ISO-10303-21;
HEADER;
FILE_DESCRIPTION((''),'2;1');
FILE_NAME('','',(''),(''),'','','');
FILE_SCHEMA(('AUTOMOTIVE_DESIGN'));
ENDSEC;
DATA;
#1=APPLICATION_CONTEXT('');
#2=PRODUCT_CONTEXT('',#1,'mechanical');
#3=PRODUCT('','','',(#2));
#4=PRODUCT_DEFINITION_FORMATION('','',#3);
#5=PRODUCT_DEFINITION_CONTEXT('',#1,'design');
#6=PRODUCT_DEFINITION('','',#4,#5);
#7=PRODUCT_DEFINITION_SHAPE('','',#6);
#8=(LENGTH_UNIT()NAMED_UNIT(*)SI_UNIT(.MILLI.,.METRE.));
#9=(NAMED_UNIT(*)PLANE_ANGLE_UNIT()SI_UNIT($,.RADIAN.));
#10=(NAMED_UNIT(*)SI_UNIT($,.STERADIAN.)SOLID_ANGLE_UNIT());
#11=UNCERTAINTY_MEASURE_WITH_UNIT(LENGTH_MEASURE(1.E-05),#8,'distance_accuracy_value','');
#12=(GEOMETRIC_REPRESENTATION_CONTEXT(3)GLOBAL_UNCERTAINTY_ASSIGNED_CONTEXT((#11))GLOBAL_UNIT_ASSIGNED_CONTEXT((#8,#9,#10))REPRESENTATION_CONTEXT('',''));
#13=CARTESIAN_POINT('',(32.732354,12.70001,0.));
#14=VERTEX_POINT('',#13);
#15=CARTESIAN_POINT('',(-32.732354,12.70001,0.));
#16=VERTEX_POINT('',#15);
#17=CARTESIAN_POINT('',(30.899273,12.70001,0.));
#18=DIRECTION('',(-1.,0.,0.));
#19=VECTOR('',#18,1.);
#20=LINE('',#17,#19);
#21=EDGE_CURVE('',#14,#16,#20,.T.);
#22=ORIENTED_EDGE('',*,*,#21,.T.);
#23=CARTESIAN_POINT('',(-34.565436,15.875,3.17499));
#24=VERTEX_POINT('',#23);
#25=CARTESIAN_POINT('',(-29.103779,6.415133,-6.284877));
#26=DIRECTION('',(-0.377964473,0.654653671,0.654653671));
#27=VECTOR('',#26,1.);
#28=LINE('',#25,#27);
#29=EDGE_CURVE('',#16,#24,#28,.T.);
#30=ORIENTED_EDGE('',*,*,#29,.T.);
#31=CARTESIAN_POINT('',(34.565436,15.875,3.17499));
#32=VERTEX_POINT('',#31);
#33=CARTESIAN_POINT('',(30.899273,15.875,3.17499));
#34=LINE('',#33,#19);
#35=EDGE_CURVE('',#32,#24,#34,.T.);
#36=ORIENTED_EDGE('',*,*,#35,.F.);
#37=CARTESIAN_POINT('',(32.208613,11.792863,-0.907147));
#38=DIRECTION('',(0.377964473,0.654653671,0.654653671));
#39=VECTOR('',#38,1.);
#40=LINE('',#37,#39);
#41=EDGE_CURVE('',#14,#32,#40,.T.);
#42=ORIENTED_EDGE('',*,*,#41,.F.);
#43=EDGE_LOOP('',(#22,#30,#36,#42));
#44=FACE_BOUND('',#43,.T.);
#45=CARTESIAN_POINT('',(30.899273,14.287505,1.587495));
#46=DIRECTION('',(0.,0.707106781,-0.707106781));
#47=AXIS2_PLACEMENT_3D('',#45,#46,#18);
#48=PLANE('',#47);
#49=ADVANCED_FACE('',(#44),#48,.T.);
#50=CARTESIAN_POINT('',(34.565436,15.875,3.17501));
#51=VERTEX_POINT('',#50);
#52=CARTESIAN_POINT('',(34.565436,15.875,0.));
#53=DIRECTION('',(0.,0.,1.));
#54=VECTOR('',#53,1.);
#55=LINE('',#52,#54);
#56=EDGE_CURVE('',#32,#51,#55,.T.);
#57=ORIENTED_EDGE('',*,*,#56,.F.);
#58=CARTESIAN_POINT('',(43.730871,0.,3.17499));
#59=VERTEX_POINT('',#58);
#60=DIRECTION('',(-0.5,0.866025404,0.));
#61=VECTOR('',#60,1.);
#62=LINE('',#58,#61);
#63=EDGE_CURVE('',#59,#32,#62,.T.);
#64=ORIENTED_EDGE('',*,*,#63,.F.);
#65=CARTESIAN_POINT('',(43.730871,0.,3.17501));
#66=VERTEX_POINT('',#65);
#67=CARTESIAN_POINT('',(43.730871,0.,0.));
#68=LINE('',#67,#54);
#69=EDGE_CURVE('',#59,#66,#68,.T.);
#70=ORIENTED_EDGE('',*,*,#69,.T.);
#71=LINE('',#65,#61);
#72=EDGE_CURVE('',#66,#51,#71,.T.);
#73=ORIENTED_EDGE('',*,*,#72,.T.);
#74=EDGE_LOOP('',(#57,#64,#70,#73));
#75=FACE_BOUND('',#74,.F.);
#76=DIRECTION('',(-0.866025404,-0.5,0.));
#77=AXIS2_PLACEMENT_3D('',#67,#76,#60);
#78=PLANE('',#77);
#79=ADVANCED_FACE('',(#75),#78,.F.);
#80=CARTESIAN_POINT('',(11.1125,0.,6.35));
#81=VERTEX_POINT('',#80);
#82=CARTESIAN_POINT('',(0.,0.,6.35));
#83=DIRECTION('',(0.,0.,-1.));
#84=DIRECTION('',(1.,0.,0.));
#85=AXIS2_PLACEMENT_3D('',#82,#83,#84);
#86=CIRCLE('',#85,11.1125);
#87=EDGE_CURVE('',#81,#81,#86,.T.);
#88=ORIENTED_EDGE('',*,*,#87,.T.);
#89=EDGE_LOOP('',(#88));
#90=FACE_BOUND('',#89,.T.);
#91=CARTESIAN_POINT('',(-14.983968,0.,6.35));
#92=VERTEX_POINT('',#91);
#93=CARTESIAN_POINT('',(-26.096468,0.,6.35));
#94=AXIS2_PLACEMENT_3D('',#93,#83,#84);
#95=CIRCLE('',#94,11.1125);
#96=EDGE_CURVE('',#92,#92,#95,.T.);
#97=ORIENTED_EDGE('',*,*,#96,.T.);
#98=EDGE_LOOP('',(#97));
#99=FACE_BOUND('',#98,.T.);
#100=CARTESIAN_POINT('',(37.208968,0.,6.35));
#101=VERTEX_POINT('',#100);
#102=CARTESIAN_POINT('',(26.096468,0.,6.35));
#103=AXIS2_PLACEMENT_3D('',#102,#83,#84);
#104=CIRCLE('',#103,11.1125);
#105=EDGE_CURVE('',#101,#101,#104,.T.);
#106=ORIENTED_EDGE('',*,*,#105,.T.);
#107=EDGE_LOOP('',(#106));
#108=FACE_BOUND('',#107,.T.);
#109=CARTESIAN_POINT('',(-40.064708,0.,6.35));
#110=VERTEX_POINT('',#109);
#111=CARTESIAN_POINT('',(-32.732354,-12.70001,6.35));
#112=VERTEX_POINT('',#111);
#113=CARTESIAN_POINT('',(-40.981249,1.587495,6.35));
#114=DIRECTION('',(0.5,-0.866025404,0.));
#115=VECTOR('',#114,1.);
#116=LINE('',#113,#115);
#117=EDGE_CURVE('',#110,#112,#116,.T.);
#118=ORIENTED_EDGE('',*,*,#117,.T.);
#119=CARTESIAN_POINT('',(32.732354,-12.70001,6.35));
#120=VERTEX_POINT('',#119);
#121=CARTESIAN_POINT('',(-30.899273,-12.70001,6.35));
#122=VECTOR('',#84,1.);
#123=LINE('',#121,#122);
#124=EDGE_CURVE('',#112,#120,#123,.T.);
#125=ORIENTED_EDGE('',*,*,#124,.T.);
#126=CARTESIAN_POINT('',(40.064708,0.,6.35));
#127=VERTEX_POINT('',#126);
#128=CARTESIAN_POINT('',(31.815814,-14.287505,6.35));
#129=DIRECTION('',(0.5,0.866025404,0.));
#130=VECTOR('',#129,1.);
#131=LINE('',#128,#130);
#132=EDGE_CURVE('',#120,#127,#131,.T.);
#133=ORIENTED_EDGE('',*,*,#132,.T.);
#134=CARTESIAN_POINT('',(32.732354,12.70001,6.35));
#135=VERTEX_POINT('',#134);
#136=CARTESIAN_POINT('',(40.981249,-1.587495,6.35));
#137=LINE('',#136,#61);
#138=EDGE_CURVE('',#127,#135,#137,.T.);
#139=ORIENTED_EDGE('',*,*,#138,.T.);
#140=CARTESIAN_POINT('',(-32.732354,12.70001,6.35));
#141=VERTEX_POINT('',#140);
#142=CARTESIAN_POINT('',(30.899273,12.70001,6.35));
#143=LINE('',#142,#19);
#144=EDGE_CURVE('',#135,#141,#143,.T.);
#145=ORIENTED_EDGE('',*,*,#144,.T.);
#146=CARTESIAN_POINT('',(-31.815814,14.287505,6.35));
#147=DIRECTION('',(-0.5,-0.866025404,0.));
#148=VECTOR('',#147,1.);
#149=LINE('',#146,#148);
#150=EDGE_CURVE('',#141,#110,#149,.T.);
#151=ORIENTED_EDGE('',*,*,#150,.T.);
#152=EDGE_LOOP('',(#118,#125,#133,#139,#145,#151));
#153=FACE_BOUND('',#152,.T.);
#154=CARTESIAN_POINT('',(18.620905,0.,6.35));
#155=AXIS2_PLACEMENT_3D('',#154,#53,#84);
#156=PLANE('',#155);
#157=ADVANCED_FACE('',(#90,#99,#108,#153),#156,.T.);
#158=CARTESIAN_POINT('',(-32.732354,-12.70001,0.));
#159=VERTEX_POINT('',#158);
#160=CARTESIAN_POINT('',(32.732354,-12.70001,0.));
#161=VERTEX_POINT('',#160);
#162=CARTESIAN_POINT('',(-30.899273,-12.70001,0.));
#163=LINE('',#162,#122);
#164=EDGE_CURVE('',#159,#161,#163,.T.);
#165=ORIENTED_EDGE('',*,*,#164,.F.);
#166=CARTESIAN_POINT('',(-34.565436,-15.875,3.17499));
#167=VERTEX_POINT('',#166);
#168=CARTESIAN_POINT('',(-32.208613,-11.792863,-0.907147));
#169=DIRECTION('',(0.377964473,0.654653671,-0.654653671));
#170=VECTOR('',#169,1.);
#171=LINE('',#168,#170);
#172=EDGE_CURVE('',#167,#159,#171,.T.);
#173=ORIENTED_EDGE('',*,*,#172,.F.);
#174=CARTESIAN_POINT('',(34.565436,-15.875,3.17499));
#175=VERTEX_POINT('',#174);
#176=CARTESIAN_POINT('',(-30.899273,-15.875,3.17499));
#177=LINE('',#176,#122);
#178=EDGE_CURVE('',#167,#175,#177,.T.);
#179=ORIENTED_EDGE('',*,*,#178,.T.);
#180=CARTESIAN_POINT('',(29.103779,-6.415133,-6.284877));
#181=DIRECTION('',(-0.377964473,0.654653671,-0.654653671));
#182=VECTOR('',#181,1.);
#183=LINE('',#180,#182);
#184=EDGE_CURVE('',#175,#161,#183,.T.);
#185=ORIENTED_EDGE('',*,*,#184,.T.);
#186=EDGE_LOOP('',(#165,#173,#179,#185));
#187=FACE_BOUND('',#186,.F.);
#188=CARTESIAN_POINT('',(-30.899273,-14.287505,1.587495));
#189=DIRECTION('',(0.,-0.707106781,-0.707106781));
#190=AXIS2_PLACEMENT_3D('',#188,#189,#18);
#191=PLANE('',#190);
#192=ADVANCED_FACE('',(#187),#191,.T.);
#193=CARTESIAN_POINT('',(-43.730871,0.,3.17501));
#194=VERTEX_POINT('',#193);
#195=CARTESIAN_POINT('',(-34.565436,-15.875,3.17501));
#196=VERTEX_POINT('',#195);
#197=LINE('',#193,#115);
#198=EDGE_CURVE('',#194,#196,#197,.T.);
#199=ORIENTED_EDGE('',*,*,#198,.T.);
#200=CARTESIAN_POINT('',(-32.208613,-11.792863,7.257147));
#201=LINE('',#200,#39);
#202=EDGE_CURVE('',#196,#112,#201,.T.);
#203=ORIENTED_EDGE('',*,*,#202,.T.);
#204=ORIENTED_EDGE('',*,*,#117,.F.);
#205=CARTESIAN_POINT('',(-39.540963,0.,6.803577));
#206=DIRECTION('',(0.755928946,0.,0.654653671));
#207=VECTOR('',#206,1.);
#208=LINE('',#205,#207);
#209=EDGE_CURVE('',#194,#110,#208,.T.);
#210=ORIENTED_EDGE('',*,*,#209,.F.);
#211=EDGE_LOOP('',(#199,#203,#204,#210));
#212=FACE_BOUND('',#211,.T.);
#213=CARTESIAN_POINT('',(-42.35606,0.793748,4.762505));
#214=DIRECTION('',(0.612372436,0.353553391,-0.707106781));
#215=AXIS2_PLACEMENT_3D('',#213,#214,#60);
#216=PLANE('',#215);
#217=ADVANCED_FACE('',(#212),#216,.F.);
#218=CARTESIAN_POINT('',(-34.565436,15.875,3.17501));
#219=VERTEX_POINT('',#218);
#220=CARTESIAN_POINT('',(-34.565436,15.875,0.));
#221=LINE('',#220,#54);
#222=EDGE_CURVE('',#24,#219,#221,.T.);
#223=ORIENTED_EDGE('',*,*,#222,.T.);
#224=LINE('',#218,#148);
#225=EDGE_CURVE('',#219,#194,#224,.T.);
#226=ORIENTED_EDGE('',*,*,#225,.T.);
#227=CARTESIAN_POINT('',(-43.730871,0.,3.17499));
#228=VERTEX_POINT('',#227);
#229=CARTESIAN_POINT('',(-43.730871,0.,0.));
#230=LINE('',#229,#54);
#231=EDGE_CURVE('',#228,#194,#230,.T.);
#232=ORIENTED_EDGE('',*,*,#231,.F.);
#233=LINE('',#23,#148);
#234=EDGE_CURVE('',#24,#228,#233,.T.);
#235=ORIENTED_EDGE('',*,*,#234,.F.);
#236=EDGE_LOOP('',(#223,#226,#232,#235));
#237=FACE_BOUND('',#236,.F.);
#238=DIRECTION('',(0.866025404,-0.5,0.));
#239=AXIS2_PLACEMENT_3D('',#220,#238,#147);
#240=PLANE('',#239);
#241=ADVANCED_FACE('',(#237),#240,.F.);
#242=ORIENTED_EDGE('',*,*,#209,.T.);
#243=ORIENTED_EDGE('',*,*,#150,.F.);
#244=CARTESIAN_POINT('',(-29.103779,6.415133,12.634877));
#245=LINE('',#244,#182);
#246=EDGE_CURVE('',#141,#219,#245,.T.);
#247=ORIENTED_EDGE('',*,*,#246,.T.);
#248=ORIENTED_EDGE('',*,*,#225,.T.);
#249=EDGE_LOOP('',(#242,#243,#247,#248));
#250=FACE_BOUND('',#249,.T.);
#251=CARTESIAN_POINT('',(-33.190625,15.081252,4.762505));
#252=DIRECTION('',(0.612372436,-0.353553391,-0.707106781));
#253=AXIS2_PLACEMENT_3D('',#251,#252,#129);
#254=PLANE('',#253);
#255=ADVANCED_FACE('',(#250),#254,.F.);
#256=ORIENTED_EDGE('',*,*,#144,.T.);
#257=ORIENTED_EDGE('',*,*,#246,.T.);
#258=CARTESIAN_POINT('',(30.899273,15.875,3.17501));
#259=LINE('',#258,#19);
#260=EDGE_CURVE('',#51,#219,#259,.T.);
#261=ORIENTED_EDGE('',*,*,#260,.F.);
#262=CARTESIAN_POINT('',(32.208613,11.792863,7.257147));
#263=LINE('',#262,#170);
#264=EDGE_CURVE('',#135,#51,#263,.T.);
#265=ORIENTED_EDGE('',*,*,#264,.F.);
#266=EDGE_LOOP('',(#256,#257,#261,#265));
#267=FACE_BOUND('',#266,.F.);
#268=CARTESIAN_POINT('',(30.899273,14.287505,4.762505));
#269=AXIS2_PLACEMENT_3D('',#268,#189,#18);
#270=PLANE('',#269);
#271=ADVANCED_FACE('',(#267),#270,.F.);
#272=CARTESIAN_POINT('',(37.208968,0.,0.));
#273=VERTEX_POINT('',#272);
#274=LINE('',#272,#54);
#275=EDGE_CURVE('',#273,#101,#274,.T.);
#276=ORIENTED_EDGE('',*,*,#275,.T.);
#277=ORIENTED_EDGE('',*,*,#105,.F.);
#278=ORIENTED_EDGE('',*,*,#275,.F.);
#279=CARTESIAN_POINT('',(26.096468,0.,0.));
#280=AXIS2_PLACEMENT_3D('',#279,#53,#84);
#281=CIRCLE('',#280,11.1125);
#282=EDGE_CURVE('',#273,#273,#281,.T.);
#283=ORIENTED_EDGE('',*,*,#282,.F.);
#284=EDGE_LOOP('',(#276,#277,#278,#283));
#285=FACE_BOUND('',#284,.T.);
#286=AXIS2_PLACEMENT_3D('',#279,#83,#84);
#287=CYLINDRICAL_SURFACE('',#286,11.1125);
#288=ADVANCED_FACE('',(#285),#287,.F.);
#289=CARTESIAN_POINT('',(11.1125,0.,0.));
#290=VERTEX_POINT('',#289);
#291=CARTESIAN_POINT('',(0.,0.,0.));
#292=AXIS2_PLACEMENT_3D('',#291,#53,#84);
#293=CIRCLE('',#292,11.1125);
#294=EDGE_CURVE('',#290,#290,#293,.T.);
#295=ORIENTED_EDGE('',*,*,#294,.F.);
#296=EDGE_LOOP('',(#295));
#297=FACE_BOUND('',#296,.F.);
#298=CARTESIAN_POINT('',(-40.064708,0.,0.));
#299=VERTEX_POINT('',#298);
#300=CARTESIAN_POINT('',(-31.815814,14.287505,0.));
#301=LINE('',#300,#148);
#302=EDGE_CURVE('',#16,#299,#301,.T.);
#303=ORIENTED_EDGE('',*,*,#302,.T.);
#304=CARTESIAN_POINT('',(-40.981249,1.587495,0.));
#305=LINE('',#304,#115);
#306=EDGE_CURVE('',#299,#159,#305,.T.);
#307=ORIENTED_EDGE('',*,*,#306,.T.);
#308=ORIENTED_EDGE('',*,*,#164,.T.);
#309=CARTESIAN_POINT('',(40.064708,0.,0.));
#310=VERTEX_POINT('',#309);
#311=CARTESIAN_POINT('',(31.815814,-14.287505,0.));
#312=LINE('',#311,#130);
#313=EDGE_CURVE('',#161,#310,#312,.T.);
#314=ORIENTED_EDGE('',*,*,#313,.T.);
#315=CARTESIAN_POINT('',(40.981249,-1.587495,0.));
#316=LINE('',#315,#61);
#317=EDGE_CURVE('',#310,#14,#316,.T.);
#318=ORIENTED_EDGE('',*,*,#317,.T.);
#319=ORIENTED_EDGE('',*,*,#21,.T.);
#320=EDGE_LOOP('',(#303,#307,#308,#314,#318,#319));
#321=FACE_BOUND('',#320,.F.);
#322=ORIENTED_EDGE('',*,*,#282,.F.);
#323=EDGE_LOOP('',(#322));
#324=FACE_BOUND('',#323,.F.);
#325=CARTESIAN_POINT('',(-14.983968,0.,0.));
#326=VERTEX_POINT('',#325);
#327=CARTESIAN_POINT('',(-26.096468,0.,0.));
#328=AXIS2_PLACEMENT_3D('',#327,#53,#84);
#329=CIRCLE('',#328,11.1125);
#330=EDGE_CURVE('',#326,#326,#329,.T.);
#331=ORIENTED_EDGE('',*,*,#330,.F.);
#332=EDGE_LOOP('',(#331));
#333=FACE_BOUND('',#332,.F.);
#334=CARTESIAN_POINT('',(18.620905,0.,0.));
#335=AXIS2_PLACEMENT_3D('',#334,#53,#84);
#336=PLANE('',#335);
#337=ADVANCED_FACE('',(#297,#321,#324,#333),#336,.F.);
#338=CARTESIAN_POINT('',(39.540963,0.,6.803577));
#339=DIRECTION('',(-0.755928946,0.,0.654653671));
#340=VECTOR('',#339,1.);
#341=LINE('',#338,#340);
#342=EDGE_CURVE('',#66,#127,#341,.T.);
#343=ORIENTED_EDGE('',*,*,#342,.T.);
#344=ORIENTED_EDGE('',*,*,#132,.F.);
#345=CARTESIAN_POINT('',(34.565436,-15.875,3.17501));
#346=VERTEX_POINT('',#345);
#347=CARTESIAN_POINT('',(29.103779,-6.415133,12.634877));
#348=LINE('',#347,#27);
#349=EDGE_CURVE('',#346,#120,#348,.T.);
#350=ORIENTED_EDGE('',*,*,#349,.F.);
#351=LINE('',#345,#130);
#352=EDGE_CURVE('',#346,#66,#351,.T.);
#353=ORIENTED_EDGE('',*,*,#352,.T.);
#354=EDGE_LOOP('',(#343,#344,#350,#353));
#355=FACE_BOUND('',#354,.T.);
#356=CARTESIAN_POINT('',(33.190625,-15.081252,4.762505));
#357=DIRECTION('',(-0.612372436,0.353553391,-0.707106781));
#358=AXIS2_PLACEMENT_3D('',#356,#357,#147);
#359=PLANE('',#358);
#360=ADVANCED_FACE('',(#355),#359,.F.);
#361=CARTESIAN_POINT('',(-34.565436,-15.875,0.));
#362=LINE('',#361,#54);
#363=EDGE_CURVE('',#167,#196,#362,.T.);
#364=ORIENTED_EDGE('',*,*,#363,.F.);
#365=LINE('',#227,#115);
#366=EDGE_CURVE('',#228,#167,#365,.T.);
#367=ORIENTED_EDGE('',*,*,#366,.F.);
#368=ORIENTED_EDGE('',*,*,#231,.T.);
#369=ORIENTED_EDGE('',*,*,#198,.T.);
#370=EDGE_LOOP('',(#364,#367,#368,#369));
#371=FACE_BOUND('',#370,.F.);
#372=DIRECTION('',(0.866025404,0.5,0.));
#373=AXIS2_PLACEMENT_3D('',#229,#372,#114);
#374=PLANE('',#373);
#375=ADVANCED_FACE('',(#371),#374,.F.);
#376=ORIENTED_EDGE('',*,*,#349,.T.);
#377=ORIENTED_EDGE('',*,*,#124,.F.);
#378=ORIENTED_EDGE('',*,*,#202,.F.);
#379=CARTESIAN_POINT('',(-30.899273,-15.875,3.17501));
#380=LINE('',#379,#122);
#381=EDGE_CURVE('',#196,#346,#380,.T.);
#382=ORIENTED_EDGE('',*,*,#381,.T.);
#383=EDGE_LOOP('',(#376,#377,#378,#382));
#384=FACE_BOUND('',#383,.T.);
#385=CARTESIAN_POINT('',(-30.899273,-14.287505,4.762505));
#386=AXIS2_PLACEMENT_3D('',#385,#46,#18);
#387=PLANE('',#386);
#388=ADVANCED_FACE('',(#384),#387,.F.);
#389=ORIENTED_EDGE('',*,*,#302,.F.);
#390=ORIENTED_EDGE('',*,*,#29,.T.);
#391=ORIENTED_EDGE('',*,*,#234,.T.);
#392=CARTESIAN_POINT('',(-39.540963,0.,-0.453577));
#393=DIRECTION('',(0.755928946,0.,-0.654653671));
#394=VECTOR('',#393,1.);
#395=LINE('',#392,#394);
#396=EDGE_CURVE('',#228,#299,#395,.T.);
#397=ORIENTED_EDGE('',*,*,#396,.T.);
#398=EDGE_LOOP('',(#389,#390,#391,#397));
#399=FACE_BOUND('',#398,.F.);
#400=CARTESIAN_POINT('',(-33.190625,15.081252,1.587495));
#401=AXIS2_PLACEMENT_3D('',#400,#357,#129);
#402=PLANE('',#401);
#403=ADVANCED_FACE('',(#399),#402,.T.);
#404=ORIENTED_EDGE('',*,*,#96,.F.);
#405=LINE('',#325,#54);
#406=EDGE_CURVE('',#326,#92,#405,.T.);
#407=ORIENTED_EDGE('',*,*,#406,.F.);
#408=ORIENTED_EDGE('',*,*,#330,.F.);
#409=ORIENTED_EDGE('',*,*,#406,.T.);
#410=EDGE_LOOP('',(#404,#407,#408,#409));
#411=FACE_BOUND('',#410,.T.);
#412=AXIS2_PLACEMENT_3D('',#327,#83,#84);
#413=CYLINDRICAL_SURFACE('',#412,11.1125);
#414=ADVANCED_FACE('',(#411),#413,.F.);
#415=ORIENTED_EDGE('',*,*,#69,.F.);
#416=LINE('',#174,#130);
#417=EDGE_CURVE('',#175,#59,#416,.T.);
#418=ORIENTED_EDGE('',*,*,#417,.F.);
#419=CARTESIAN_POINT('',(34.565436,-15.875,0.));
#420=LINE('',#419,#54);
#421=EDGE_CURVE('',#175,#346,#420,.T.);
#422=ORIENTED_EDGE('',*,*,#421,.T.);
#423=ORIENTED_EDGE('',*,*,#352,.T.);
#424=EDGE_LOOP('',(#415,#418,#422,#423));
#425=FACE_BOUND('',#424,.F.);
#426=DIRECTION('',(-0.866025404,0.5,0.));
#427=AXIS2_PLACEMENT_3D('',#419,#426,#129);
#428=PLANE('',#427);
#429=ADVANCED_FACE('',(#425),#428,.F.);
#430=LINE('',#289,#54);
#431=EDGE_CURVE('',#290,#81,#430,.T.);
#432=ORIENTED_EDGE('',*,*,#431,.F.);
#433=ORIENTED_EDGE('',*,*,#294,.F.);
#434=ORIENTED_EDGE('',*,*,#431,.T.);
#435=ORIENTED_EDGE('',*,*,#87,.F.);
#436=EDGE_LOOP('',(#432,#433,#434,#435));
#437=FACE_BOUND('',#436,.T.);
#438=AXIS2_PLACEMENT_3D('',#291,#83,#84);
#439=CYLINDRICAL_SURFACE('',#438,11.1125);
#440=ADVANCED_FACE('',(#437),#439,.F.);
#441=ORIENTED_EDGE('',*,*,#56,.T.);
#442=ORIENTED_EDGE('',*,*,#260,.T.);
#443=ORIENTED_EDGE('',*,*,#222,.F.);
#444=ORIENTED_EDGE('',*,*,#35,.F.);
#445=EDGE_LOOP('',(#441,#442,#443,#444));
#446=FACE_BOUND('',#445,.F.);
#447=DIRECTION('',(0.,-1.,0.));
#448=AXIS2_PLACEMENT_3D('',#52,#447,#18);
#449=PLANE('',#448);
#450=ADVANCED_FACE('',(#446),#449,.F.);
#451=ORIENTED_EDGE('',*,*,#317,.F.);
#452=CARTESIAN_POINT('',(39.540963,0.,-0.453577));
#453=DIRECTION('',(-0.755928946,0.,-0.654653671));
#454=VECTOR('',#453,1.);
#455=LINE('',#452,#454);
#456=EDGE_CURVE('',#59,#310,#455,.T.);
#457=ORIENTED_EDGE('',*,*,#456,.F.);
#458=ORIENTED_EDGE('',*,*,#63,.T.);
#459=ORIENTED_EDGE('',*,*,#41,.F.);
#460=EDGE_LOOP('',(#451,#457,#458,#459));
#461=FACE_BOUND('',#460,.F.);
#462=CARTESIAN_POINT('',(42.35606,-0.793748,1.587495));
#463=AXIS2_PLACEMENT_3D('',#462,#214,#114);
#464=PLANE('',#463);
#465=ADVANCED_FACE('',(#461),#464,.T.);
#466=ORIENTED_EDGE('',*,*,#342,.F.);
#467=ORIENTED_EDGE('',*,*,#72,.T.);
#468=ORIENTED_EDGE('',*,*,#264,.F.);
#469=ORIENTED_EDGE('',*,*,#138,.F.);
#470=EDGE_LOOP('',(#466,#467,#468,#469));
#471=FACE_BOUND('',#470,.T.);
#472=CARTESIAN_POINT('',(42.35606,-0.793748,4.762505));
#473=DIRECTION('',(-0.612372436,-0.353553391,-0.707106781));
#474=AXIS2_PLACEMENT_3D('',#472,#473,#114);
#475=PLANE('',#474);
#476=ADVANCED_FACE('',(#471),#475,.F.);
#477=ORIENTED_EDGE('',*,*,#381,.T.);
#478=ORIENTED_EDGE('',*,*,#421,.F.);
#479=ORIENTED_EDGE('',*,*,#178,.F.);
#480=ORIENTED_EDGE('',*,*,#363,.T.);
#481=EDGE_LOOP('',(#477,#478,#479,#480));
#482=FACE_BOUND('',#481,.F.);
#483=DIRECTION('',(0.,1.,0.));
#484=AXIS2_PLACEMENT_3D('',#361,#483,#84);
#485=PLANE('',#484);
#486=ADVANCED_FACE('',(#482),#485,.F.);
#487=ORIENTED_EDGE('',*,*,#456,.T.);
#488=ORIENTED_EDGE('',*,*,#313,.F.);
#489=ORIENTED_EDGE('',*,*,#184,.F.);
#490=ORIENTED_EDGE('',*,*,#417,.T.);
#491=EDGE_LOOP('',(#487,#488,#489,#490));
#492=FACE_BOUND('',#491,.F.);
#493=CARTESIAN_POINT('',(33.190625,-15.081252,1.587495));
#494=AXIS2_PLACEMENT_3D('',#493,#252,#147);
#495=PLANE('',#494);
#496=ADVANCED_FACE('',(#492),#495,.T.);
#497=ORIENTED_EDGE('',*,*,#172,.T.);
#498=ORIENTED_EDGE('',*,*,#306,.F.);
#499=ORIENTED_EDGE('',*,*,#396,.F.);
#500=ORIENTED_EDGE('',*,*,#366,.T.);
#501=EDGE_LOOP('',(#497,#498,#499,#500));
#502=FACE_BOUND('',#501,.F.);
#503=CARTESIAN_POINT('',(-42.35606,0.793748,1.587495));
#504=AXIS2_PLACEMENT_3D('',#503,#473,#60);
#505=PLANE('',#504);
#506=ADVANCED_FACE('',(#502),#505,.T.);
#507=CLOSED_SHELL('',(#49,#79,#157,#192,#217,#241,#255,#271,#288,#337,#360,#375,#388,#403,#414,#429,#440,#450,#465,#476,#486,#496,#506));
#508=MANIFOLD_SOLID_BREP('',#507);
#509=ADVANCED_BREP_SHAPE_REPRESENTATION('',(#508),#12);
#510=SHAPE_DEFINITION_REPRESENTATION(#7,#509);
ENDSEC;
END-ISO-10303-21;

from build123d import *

# Parameters (mm, degrees)
F1_DEPTH = 6.35
F3_SIZE  = 3.17499
F4_SIZE  = 3.17499
F2_R     = 11.1125
F5_DEPTH = 25.4
F6_R     = 11.1125
F7_DEPTH = 25.4


# Not quite as in the source:
# - a fillet or chamfer is up to 0.001 mm smaller than in the source, because OpenCascade refuses the exact size


with BuildPart() as f1:
    # F0 (on Top) → F1 (new body)
    with BuildSketch(Plane.XY):
        Polygon((25.4, -15.875), (25.4, 15.875), (16.2345644766, 15.875), (7.0691289532, 0), (16.2345644766, -15.875), align=None)
        Polygon((34.5654355234, 15.875), (25.4, 15.875), (25.4, -15.875), (34.5654355234, -15.875), (43.7308710468, 0), align=None)
        Polygon((7.0691289532, 0), (16.2345644766, 15.875), (-16.2345644766, 15.875), (-7.0691289532, 0), (-16.2345644766, -15.875), (16.2345644766, -15.875), align=None)
        Polygon((-7.0691289532, 0), (-16.2345644766, 15.875), (-25.4, 15.875), (-25.4, -15.875), (-16.2345644766, -15.875), align=None)
        Polygon((-25.4, -15.875), (-25.4, 15.875), (-34.5654355234, 15.875), (-43.7308710468, 0), (-34.5654355234, -15.875), align=None)
    extrude(amount=F1_DEPTH)

    # F3 (size 3.175 in the source; OpenCascade refuses exactly that, so slightly less here)
    f3_edges = [f1.edges().sort_by_distance(p)[0] for p in [
        (-39.148153, -7.9375, 0),
        (-39.148153, 7.9375, 6.35),
        (-39.148153, -7.9375, 6.35),
        (-39.148153, 7.9375, 0),
        (39.148153, -7.9375, 6.35),
        (39.148153, 7.9375, 6.35),
        (39.148153, 7.9375, 0),
        (39.148153, -7.9375, 0),
    ]]
    chamfer(f3_edges, length=F3_SIZE)

    # F4 (size 3.175 in the source; OpenCascade refuses exactly that, so slightly less here)
    f4_edges = [f1.edges().sort_by_distance(p)[0] for p in [
        (0, 15.875, 0),
        (0, 15.875, 6.35),
        (0, -15.875, 6.35),
        (0, -15.875, 0),
    ]]
    chamfer(f4_edges, length=F4_SIZE)

    # F2 (on Top) → F5 (cut)
    with BuildSketch(Plane.XY):
        Circle(F2_R)
    extrude(amount=F5_DEPTH, mode=Mode.SUBTRACT)

    # F6 (on Top) → F7 (cut)
    with BuildSketch(Plane.XY):
        with Locations((26.0964684711, 0)):
            Circle(F6_R)
        with Locations((-26.0964684711, 0)):
            Circle(F6_R)
    extrude(amount=F7_DEPTH, mode=Mode.SUBTRACT)


solid = f1.part
